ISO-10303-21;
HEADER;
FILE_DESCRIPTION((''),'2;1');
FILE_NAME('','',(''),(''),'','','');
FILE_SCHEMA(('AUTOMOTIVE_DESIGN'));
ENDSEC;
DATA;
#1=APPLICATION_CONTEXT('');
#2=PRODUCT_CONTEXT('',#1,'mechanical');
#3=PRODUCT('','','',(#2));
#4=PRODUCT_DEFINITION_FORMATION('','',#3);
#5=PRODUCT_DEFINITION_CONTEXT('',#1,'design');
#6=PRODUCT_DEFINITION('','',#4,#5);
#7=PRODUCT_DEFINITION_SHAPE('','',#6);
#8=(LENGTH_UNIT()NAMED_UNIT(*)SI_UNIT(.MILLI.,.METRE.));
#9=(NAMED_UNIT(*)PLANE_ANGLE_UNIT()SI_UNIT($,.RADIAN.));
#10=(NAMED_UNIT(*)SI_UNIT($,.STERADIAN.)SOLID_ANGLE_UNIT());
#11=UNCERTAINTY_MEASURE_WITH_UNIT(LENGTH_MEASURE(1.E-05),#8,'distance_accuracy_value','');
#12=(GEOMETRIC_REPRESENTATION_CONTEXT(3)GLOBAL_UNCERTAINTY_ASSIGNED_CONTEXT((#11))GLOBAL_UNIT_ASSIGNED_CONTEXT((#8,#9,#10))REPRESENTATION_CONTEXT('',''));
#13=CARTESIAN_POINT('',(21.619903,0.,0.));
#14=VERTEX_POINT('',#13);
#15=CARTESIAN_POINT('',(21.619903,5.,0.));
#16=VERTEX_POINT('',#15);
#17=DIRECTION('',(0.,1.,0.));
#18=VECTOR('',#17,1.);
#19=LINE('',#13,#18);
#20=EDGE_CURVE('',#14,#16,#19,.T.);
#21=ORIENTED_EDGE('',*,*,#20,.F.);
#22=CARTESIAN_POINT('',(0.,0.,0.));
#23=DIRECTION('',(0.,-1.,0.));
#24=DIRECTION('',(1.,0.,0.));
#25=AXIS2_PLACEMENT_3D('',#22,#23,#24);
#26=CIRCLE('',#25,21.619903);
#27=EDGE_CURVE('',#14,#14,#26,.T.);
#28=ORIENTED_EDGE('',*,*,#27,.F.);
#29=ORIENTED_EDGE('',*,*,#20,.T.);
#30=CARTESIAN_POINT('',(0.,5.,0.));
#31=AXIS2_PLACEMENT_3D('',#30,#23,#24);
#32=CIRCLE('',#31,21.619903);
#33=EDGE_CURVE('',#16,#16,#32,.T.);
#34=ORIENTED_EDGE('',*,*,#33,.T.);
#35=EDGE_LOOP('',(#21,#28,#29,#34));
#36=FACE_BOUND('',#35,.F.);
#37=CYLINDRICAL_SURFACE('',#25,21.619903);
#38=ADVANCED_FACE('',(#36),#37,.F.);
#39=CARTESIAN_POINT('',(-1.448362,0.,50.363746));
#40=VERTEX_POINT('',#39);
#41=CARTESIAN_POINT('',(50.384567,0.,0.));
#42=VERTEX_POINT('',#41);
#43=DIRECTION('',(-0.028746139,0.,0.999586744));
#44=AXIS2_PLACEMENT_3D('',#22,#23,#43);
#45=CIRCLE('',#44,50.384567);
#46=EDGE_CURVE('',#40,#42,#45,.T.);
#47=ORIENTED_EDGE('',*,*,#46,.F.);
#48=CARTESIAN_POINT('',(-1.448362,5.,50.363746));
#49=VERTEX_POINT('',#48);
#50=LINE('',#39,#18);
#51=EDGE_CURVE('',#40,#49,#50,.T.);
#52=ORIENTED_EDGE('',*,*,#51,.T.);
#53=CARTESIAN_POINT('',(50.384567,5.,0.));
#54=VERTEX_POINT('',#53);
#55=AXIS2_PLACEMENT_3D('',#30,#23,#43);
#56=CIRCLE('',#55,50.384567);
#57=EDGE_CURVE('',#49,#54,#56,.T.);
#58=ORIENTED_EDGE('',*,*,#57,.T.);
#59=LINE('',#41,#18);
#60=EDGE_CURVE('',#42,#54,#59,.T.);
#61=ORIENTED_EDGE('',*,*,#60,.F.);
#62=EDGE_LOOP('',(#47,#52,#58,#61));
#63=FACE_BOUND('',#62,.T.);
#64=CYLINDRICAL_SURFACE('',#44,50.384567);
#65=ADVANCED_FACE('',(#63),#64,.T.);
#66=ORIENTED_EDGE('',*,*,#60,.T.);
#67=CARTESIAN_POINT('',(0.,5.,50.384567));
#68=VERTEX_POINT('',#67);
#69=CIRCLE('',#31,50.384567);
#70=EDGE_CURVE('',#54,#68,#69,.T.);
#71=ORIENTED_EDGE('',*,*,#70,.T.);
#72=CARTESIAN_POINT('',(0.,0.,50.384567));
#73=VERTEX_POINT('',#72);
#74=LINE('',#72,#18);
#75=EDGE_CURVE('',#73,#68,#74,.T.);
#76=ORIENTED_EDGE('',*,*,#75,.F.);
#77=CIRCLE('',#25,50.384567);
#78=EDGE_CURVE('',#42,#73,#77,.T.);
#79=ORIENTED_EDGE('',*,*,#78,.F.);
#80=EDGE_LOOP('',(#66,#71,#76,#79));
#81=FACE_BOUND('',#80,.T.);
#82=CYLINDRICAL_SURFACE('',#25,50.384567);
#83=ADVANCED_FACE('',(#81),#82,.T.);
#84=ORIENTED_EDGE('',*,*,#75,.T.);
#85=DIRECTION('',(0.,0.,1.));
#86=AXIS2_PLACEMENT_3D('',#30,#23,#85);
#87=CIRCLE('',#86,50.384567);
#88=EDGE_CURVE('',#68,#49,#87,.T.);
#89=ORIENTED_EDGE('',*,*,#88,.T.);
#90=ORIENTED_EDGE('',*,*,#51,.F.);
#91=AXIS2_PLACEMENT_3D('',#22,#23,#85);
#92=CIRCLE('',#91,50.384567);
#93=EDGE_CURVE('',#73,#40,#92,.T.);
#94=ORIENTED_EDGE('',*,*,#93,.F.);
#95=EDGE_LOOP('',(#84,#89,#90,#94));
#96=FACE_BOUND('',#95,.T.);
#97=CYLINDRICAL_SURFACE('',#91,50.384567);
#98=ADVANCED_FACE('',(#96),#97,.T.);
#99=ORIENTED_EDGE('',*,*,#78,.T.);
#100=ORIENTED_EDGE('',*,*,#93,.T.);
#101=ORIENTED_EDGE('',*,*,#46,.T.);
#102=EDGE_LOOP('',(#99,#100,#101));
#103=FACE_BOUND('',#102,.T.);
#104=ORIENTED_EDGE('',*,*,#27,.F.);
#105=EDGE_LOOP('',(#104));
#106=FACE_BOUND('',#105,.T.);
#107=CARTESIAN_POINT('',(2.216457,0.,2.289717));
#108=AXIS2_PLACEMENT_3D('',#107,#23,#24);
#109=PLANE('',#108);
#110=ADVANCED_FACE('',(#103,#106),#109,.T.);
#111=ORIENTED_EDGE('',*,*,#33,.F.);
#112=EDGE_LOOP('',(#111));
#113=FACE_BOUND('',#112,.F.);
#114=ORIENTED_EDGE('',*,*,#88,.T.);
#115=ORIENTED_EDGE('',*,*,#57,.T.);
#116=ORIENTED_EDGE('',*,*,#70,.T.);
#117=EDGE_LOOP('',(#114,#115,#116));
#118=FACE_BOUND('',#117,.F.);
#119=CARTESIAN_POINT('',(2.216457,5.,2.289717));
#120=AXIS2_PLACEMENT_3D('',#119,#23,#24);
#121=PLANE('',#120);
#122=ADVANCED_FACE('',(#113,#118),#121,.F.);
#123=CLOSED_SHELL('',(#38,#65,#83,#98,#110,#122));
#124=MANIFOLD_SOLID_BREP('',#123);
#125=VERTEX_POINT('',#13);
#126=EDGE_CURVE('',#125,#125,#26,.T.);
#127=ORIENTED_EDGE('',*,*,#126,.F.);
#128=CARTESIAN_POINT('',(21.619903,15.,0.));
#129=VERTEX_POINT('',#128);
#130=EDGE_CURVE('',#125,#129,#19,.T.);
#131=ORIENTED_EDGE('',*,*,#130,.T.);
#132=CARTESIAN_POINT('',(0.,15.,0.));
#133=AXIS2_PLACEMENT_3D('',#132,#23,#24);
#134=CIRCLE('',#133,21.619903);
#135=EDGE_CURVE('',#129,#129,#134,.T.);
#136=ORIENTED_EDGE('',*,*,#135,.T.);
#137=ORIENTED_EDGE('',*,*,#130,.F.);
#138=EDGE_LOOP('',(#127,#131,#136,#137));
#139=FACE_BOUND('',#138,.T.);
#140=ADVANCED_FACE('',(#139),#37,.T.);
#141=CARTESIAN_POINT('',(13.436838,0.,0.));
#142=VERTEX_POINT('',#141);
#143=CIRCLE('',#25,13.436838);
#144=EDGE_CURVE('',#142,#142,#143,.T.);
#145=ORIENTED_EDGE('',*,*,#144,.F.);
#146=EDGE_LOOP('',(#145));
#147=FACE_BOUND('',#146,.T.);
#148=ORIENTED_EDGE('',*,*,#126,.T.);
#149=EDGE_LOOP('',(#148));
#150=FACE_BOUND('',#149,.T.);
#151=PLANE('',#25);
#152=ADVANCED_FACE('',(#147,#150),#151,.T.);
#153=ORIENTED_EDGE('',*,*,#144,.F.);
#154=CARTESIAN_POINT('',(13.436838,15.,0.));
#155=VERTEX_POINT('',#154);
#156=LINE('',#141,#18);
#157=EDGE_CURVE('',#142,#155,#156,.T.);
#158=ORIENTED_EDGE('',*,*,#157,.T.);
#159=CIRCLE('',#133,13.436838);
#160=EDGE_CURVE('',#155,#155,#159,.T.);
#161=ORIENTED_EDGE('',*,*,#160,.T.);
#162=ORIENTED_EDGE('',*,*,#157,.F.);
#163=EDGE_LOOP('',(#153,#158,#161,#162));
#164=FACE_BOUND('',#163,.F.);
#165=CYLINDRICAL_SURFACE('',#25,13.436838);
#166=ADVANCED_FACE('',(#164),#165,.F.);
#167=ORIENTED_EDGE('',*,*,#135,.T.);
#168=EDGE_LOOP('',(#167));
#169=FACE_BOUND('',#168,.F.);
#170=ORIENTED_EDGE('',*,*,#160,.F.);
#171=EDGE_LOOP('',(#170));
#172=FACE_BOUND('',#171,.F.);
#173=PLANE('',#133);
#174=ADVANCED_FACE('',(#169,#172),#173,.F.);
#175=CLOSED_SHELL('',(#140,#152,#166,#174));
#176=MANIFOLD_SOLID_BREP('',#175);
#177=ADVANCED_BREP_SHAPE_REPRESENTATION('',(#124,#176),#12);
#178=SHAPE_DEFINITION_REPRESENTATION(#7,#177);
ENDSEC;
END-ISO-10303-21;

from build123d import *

# Parameters (mm, degrees)
F0_R     = 21.619902501
F0_R_2   = 13.4368376744
F1_DEPTH = 15
F2_DEPTH = 5


# Not quite as in the source:
# - the program builds the solid bodies; features that only make, move or delete a surface that nothing else refers to are left out


with BuildPart() as f1:
    # F0 (on Front) → F1 (new body)
    with BuildSketch(Plane.XZ):
        Circle(F0_R)
        Circle(F0_R_2, mode=Mode.SUBTRACT)
    extrude(amount=-F1_DEPTH)


with BuildPart() as f2:
    # F0 (on Front) → F2 (new body)
    with BuildSketch(Plane.XZ):
        with BuildLine():
            ThreePointArc((-1.4483617852, 50.3637455404), (-35.1114620527, -36.1357143176), (50.3845672475, 0))
            ThreePointArc((50.3845672475, 0), (35.6272691679, 35.6272691679), (0, 50.3845672475))
            Line((0, 50.3845672475), (-1.4483617852, 50.3637455404))
        make_face()
        Circle(F0_R, mode=Mode.SUBTRACT)
        with BuildLine():
            Line((-1.4483617852, 50.3637455404), (0, 50.3845672475))
            ThreePointArc((0, 50.3845672475), (-0.7242557221, 50.3793615518), (-1.4483617852, 50.3637455404))
        make_face()
    extrude(amount=-F2_DEPTH)


solid = Compound([f1.part, f2.part])
